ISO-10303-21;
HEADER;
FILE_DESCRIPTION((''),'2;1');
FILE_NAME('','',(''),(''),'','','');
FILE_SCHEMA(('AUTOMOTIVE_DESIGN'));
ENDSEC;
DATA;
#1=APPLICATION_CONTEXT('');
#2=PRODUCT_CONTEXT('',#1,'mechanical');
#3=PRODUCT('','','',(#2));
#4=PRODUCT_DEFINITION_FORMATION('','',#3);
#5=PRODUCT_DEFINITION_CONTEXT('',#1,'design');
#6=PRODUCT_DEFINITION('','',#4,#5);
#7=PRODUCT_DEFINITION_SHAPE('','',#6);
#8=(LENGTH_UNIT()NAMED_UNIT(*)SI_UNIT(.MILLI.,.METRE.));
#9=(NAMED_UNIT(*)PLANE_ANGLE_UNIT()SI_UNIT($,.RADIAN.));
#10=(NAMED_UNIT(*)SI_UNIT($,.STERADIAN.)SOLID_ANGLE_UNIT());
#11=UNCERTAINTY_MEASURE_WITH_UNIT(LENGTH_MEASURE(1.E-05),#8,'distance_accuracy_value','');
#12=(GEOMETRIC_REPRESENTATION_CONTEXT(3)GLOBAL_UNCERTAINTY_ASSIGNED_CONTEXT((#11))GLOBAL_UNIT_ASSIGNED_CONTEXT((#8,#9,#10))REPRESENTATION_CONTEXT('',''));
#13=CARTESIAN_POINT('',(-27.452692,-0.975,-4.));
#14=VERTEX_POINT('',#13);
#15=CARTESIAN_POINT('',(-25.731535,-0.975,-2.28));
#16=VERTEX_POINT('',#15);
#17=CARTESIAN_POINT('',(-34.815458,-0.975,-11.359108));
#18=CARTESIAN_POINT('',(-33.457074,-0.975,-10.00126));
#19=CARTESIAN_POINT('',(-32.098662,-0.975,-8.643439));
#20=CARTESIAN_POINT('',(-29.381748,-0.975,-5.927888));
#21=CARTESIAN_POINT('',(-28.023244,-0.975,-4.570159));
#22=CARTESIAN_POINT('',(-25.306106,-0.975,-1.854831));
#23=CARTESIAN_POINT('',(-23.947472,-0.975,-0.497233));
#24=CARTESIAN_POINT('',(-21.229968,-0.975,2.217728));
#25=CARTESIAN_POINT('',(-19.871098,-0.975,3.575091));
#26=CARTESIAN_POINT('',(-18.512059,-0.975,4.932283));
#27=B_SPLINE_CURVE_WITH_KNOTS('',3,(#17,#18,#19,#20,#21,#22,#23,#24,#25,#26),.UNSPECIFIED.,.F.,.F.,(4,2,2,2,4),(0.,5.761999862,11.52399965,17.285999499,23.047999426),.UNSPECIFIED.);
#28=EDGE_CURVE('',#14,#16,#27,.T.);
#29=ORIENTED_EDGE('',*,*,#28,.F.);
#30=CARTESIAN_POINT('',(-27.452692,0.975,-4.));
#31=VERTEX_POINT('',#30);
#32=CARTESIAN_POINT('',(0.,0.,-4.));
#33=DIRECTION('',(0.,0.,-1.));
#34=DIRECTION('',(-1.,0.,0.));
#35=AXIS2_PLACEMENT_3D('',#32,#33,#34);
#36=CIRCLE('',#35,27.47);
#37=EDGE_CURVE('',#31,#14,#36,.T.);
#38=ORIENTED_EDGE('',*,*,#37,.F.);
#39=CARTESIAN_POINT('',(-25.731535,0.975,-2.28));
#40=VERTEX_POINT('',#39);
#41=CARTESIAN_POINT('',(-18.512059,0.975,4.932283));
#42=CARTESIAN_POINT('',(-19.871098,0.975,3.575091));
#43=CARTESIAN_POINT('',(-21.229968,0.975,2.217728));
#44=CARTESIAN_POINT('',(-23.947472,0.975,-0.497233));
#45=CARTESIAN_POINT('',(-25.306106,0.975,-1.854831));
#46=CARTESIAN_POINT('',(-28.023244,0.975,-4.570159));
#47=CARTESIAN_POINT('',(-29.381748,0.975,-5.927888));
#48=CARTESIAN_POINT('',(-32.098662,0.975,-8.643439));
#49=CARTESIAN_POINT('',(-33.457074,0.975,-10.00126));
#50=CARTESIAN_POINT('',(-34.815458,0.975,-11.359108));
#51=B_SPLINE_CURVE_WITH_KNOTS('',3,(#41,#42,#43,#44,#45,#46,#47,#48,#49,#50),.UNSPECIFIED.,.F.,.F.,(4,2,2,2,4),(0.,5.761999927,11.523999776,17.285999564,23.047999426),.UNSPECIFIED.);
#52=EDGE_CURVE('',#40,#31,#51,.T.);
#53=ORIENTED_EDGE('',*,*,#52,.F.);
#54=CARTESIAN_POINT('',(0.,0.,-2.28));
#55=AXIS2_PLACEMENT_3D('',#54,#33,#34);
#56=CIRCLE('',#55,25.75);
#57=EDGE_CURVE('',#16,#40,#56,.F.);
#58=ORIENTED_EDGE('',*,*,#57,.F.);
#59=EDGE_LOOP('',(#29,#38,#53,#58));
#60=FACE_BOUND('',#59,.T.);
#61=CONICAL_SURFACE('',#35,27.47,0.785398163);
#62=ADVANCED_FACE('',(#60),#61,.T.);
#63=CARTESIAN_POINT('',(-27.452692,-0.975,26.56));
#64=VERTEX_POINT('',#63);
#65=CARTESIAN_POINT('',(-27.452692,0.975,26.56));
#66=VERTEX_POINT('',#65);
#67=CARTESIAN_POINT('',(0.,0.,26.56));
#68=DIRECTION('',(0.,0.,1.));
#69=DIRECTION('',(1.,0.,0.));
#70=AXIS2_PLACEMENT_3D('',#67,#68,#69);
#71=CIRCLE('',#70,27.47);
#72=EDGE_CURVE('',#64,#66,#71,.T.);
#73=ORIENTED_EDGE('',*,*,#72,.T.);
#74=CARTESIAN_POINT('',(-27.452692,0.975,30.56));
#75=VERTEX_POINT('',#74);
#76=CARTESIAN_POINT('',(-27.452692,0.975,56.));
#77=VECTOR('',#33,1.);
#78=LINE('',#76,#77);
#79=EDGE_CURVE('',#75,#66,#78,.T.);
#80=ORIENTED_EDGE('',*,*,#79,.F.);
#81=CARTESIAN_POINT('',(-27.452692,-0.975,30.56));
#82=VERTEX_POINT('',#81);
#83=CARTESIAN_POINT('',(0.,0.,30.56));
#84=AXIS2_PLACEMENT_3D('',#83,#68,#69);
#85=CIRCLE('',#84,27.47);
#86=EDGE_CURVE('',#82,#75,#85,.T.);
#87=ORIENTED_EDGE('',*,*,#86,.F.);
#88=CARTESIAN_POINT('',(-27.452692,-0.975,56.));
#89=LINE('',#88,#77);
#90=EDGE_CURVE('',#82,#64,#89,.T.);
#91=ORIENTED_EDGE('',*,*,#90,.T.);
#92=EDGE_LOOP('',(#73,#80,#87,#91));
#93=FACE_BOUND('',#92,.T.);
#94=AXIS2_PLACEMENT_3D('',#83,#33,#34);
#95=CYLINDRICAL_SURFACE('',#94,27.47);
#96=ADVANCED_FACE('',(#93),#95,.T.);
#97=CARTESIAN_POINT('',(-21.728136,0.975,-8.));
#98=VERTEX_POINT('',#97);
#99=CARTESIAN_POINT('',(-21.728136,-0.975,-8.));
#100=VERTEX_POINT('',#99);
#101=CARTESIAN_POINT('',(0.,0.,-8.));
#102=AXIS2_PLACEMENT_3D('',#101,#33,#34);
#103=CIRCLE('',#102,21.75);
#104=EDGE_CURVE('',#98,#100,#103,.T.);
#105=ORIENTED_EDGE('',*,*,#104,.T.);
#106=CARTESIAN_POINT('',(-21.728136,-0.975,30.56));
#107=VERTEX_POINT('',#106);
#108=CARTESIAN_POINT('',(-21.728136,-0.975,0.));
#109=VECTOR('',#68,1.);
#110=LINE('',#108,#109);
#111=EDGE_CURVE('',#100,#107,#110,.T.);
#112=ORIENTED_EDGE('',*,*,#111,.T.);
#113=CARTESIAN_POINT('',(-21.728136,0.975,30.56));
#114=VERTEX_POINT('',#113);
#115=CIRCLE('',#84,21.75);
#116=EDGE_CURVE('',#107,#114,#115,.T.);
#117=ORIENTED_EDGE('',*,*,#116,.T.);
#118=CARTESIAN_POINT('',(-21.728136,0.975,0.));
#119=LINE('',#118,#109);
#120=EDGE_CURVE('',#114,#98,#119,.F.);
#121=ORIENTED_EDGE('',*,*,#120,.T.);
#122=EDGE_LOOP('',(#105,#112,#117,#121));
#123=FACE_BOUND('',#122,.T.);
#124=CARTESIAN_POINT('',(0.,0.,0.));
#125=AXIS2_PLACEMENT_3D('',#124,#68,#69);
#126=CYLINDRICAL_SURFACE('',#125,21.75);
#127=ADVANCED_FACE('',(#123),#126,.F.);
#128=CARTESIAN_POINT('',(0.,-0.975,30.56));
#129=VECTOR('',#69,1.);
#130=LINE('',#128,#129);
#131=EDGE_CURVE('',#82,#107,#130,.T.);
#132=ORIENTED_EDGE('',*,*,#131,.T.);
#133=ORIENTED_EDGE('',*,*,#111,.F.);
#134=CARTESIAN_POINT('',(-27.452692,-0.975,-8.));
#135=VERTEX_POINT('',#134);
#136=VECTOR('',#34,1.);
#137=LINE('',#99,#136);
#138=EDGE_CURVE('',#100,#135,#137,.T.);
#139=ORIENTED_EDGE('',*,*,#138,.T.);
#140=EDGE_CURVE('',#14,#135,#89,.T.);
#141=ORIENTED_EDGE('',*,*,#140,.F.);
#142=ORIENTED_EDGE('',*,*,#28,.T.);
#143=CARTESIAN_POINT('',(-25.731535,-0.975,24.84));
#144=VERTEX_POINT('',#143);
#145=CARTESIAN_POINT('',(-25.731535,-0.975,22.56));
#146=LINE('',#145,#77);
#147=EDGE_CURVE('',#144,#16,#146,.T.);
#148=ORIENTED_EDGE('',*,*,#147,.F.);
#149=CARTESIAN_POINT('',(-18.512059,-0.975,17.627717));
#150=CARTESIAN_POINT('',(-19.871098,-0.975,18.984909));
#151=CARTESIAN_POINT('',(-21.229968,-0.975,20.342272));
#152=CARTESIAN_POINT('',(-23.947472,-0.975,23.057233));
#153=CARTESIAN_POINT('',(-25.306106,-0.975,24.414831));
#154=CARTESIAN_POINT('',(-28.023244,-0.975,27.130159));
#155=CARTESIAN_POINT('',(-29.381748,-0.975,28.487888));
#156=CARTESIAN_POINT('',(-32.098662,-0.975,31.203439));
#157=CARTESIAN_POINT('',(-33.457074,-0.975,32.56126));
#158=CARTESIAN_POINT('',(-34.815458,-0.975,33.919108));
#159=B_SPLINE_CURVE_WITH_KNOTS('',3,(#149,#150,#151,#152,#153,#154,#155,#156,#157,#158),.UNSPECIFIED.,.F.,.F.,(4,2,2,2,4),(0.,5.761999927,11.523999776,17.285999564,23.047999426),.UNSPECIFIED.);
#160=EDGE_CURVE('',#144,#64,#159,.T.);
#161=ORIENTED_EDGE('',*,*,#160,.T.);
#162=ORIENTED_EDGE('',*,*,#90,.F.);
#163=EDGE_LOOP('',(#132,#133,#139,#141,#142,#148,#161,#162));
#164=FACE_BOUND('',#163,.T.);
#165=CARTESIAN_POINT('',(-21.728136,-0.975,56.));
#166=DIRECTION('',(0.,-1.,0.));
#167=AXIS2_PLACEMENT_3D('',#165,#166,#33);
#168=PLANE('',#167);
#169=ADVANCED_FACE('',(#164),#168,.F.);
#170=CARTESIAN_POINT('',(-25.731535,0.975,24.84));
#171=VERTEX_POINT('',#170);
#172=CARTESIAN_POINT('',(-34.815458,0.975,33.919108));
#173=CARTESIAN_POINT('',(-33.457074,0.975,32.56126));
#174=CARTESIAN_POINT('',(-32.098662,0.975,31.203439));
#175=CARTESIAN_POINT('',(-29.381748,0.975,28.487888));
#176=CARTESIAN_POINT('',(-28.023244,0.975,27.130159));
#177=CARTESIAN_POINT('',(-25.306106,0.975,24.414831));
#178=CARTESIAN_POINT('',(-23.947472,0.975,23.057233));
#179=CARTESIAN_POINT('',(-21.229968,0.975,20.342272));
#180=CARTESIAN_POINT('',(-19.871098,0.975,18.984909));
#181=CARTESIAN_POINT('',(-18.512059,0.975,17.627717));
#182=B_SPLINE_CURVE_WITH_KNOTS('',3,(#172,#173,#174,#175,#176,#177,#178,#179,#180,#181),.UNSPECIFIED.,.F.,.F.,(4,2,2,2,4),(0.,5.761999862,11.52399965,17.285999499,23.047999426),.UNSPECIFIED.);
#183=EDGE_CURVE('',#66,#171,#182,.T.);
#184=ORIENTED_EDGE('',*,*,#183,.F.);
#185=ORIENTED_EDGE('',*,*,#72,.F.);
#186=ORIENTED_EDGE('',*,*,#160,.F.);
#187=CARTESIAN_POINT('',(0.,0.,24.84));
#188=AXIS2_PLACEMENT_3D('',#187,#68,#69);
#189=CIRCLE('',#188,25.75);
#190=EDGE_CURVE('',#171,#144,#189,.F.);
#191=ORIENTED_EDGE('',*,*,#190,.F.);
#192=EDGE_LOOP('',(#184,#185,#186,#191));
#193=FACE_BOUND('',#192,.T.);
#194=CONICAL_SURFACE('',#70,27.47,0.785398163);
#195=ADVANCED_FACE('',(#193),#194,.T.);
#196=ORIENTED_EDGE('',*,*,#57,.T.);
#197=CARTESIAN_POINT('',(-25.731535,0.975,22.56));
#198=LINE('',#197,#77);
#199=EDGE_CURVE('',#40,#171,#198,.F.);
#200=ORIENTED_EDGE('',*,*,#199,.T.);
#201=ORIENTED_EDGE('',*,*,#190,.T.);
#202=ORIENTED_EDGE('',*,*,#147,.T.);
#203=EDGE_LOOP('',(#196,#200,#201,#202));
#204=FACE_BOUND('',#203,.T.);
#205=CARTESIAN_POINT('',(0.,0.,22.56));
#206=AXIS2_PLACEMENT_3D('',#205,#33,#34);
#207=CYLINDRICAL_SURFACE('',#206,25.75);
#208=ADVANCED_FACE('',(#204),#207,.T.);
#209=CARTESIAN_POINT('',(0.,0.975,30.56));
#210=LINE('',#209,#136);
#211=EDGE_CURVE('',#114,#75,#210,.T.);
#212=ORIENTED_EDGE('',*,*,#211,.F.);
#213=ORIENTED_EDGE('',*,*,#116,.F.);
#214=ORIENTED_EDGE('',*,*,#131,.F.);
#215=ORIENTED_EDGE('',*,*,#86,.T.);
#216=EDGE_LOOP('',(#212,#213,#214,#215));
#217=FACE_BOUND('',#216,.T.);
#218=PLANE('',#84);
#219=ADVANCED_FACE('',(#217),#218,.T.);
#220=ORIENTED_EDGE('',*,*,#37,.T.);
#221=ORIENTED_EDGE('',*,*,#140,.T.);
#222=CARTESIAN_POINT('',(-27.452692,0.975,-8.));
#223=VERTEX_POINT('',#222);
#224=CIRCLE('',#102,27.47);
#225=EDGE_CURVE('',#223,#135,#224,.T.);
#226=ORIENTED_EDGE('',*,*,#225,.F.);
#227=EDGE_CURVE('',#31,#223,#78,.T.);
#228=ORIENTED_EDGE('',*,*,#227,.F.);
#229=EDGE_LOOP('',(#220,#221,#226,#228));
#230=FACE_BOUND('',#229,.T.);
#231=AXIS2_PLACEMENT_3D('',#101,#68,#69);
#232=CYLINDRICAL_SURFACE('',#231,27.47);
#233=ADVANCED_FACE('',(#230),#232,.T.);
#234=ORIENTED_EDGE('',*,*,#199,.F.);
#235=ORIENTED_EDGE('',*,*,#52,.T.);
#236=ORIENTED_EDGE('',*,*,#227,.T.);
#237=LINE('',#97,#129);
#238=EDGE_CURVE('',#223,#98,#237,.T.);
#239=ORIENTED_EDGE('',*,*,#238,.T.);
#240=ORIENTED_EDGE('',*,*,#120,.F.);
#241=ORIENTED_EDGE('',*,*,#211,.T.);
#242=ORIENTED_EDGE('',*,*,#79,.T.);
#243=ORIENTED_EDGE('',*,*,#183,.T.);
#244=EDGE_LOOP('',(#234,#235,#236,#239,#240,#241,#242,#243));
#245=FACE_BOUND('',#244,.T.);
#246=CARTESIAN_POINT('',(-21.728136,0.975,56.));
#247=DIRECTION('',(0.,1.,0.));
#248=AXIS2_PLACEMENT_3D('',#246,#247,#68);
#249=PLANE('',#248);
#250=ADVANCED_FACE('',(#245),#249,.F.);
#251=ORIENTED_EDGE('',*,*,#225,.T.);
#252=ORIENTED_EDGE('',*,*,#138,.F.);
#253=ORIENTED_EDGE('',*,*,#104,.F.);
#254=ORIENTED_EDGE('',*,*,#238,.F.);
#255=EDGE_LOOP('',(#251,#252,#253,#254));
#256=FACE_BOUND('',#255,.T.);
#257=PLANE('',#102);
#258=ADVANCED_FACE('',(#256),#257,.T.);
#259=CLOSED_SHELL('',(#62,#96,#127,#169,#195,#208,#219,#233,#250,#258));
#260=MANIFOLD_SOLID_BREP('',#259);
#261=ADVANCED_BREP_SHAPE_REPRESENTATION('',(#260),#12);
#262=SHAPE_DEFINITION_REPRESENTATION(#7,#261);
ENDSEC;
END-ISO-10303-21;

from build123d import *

# Parameters (mm, degrees)
IZIM1_R                     = 25.75
Y_KSEKLIK_EKSTR_ZYON2_DEPTH = 22.56
IZIM2_R                     = 21.75
KES_EKSTR_ZYON1_DEPTH       = 22.56
IZIM3_R                     = 27.47
Y_KSEKLIK_EKSTR_ZYON3_DEPTH = 8
PAH1_SIZE                   = 4
Y_KSEKLIK_EKSTR_ZYON4_START = 8
IZIM5_R                     = 27.47
Y_KSEKLIK_EKSTR_ZYON4_DEPTH = 8
PAH2_SIZE                   = 4
IZIM6_R                     = 21.75
KES_EKSTR_ZYON4_DEPTH       = 8
KES_EKSTR_ZYON5_START       = -8
IZIM7_R                     = 21.75
KES_EKSTR_ZYON5_DEPTH       = 8
KES_EKSTR_ZYON6_START       = -64
KES_EKSTR_ZYON6_DEPTH       = 64


with BuildPart() as part:
    # Çizim1 → Yükseklik-Ekstrüzyon2 (new body)
    with BuildSketch(Plane.XY):
        Circle(IZIM1_R)
    extrude(amount=Y_KSEKLIK_EKSTR_ZYON2_DEPTH)

    # Çizim2 → Kes-Ekstrüzyon1 (cut)
    with BuildSketch(Plane.XY.offset(22.56)):
        Circle(IZIM2_R)
    extrude(amount=-KES_EKSTR_ZYON1_DEPTH, mode=Mode.SUBTRACT)

    # Çizim3 → Yükseklik-Ekstrüzyon3 (add)
    with BuildSketch(Plane.XY.offset(22.56)):
        Circle(IZIM3_R)
    extrude(amount=Y_KSEKLIK_EKSTR_ZYON3_DEPTH)

    # Pah1
    # the kernel refuses this chamfer: 4 mm, written as the material it takes off along each edge
    with BuildSketch(Plane(origin=(0, 0, 22.56), x_dir=(1, 0, 0), z_dir=(0, -1, 0))) as pah1_piece_1_section:
        Polygon((27.47, PAH1_SIZE), (27.47 - PAH1_SIZE, 0), (27.47, 0), align=None)
    pah1_piece_1 = revolve(axis=Axis((0, 0, 22.56), (0, 0, 1)), mode=Mode.PRIVATE)
    pah1_piece_1 = pah1_piece_1 - Plane(origin=(0, 0, 25.685965648), x_dir=(1, 0, 0), z_dir=(0, 0, -1)) * Cylinder(25.75, 110, mode=Mode.PRIVATE)
    add(pah1_piece_1, mode=Mode.SUBTRACT)

    # Çizim5 → Yükseklik-Ekstrüzyon4 (add)
    with BuildSketch(Plane(origin=(0, 0, 0), x_dir=(-1, 0, 0), z_dir=(0, 0, -1)).offset(Y_KSEKLIK_EKSTR_ZYON4_START)):
        with Locations(Location((0, 0, 0), (0, 0, 180))):
            Circle(IZIM5_R)
    extrude(amount=-Y_KSEKLIK_EKSTR_ZYON4_DEPTH)

    # Pah2
    # the kernel refuses this chamfer: 4 mm, written as the material it takes off along each edge
    with BuildSketch(Plane(origin=(0, 0, 0), x_dir=(1, 0, 0), z_dir=(0, 1, 0))) as pah2_piece_1_section:
        Polygon((27.47, PAH2_SIZE), (27.47 - PAH2_SIZE, 0), (27.47, 0), align=None)
    pah2_piece_1 = revolve(axis=Axis((0, 0, 0), (0, 0, -1)), mode=Mode.PRIVATE)
    pah2_piece_1 = pah2_piece_1 - Plane(origin=(0, 0, -3.125965648), x_dir=(1, 0, 0), z_dir=(0, 0, -1)) * Cylinder(25.75, 110, mode=Mode.PRIVATE)
    add(pah2_piece_1, mode=Mode.SUBTRACT)

    # Çizim6 → Kes-Ekstrüzyon4 (cut)
    with BuildSketch(Plane.XY.offset(30.56)):
        Circle(IZIM6_R)
    extrude(amount=-KES_EKSTR_ZYON4_DEPTH, mode=Mode.SUBTRACT)

    # Çizim7 → Kes-Ekstrüzyon5 (cut)
    with BuildSketch(Plane(origin=(0, 0, -8), x_dir=(-1, 0, 0), z_dir=(0, 0, -1)).offset(KES_EKSTR_ZYON5_START)):
        with Locations(Location((0, 0, 0), (0, 0, 180))):
            Circle(IZIM7_R)
    extrude(amount=KES_EKSTR_ZYON5_DEPTH, mode=Mode.SUBTRACT)

    # Çizim8 → Kes-Ekstrüzyon6 (cut)
    with BuildSketch(Plane(origin=(0, 0, -8), x_dir=(-1, 0, 0), z_dir=(0, 0, -1)).offset(KES_EKSTR_ZYON6_START)):
        with BuildLine():
            Line((21.728135562, 0.975), (27.45269158, 0.975))
            ThreePointArc((27.45269158, 0.975), (27.47, 0), (27.45269158, -0.975))
            Line((27.45269158, -0.975), (21.728135562, -0.975))
            ThreePointArc((21.728135562, -0.975), (21.75, 0), (21.728135562, 0.975))
        make_face()
    extrude(amount=KES_EKSTR_ZYON6_DEPTH, mode=Mode.SUBTRACT)


solid = part.part
